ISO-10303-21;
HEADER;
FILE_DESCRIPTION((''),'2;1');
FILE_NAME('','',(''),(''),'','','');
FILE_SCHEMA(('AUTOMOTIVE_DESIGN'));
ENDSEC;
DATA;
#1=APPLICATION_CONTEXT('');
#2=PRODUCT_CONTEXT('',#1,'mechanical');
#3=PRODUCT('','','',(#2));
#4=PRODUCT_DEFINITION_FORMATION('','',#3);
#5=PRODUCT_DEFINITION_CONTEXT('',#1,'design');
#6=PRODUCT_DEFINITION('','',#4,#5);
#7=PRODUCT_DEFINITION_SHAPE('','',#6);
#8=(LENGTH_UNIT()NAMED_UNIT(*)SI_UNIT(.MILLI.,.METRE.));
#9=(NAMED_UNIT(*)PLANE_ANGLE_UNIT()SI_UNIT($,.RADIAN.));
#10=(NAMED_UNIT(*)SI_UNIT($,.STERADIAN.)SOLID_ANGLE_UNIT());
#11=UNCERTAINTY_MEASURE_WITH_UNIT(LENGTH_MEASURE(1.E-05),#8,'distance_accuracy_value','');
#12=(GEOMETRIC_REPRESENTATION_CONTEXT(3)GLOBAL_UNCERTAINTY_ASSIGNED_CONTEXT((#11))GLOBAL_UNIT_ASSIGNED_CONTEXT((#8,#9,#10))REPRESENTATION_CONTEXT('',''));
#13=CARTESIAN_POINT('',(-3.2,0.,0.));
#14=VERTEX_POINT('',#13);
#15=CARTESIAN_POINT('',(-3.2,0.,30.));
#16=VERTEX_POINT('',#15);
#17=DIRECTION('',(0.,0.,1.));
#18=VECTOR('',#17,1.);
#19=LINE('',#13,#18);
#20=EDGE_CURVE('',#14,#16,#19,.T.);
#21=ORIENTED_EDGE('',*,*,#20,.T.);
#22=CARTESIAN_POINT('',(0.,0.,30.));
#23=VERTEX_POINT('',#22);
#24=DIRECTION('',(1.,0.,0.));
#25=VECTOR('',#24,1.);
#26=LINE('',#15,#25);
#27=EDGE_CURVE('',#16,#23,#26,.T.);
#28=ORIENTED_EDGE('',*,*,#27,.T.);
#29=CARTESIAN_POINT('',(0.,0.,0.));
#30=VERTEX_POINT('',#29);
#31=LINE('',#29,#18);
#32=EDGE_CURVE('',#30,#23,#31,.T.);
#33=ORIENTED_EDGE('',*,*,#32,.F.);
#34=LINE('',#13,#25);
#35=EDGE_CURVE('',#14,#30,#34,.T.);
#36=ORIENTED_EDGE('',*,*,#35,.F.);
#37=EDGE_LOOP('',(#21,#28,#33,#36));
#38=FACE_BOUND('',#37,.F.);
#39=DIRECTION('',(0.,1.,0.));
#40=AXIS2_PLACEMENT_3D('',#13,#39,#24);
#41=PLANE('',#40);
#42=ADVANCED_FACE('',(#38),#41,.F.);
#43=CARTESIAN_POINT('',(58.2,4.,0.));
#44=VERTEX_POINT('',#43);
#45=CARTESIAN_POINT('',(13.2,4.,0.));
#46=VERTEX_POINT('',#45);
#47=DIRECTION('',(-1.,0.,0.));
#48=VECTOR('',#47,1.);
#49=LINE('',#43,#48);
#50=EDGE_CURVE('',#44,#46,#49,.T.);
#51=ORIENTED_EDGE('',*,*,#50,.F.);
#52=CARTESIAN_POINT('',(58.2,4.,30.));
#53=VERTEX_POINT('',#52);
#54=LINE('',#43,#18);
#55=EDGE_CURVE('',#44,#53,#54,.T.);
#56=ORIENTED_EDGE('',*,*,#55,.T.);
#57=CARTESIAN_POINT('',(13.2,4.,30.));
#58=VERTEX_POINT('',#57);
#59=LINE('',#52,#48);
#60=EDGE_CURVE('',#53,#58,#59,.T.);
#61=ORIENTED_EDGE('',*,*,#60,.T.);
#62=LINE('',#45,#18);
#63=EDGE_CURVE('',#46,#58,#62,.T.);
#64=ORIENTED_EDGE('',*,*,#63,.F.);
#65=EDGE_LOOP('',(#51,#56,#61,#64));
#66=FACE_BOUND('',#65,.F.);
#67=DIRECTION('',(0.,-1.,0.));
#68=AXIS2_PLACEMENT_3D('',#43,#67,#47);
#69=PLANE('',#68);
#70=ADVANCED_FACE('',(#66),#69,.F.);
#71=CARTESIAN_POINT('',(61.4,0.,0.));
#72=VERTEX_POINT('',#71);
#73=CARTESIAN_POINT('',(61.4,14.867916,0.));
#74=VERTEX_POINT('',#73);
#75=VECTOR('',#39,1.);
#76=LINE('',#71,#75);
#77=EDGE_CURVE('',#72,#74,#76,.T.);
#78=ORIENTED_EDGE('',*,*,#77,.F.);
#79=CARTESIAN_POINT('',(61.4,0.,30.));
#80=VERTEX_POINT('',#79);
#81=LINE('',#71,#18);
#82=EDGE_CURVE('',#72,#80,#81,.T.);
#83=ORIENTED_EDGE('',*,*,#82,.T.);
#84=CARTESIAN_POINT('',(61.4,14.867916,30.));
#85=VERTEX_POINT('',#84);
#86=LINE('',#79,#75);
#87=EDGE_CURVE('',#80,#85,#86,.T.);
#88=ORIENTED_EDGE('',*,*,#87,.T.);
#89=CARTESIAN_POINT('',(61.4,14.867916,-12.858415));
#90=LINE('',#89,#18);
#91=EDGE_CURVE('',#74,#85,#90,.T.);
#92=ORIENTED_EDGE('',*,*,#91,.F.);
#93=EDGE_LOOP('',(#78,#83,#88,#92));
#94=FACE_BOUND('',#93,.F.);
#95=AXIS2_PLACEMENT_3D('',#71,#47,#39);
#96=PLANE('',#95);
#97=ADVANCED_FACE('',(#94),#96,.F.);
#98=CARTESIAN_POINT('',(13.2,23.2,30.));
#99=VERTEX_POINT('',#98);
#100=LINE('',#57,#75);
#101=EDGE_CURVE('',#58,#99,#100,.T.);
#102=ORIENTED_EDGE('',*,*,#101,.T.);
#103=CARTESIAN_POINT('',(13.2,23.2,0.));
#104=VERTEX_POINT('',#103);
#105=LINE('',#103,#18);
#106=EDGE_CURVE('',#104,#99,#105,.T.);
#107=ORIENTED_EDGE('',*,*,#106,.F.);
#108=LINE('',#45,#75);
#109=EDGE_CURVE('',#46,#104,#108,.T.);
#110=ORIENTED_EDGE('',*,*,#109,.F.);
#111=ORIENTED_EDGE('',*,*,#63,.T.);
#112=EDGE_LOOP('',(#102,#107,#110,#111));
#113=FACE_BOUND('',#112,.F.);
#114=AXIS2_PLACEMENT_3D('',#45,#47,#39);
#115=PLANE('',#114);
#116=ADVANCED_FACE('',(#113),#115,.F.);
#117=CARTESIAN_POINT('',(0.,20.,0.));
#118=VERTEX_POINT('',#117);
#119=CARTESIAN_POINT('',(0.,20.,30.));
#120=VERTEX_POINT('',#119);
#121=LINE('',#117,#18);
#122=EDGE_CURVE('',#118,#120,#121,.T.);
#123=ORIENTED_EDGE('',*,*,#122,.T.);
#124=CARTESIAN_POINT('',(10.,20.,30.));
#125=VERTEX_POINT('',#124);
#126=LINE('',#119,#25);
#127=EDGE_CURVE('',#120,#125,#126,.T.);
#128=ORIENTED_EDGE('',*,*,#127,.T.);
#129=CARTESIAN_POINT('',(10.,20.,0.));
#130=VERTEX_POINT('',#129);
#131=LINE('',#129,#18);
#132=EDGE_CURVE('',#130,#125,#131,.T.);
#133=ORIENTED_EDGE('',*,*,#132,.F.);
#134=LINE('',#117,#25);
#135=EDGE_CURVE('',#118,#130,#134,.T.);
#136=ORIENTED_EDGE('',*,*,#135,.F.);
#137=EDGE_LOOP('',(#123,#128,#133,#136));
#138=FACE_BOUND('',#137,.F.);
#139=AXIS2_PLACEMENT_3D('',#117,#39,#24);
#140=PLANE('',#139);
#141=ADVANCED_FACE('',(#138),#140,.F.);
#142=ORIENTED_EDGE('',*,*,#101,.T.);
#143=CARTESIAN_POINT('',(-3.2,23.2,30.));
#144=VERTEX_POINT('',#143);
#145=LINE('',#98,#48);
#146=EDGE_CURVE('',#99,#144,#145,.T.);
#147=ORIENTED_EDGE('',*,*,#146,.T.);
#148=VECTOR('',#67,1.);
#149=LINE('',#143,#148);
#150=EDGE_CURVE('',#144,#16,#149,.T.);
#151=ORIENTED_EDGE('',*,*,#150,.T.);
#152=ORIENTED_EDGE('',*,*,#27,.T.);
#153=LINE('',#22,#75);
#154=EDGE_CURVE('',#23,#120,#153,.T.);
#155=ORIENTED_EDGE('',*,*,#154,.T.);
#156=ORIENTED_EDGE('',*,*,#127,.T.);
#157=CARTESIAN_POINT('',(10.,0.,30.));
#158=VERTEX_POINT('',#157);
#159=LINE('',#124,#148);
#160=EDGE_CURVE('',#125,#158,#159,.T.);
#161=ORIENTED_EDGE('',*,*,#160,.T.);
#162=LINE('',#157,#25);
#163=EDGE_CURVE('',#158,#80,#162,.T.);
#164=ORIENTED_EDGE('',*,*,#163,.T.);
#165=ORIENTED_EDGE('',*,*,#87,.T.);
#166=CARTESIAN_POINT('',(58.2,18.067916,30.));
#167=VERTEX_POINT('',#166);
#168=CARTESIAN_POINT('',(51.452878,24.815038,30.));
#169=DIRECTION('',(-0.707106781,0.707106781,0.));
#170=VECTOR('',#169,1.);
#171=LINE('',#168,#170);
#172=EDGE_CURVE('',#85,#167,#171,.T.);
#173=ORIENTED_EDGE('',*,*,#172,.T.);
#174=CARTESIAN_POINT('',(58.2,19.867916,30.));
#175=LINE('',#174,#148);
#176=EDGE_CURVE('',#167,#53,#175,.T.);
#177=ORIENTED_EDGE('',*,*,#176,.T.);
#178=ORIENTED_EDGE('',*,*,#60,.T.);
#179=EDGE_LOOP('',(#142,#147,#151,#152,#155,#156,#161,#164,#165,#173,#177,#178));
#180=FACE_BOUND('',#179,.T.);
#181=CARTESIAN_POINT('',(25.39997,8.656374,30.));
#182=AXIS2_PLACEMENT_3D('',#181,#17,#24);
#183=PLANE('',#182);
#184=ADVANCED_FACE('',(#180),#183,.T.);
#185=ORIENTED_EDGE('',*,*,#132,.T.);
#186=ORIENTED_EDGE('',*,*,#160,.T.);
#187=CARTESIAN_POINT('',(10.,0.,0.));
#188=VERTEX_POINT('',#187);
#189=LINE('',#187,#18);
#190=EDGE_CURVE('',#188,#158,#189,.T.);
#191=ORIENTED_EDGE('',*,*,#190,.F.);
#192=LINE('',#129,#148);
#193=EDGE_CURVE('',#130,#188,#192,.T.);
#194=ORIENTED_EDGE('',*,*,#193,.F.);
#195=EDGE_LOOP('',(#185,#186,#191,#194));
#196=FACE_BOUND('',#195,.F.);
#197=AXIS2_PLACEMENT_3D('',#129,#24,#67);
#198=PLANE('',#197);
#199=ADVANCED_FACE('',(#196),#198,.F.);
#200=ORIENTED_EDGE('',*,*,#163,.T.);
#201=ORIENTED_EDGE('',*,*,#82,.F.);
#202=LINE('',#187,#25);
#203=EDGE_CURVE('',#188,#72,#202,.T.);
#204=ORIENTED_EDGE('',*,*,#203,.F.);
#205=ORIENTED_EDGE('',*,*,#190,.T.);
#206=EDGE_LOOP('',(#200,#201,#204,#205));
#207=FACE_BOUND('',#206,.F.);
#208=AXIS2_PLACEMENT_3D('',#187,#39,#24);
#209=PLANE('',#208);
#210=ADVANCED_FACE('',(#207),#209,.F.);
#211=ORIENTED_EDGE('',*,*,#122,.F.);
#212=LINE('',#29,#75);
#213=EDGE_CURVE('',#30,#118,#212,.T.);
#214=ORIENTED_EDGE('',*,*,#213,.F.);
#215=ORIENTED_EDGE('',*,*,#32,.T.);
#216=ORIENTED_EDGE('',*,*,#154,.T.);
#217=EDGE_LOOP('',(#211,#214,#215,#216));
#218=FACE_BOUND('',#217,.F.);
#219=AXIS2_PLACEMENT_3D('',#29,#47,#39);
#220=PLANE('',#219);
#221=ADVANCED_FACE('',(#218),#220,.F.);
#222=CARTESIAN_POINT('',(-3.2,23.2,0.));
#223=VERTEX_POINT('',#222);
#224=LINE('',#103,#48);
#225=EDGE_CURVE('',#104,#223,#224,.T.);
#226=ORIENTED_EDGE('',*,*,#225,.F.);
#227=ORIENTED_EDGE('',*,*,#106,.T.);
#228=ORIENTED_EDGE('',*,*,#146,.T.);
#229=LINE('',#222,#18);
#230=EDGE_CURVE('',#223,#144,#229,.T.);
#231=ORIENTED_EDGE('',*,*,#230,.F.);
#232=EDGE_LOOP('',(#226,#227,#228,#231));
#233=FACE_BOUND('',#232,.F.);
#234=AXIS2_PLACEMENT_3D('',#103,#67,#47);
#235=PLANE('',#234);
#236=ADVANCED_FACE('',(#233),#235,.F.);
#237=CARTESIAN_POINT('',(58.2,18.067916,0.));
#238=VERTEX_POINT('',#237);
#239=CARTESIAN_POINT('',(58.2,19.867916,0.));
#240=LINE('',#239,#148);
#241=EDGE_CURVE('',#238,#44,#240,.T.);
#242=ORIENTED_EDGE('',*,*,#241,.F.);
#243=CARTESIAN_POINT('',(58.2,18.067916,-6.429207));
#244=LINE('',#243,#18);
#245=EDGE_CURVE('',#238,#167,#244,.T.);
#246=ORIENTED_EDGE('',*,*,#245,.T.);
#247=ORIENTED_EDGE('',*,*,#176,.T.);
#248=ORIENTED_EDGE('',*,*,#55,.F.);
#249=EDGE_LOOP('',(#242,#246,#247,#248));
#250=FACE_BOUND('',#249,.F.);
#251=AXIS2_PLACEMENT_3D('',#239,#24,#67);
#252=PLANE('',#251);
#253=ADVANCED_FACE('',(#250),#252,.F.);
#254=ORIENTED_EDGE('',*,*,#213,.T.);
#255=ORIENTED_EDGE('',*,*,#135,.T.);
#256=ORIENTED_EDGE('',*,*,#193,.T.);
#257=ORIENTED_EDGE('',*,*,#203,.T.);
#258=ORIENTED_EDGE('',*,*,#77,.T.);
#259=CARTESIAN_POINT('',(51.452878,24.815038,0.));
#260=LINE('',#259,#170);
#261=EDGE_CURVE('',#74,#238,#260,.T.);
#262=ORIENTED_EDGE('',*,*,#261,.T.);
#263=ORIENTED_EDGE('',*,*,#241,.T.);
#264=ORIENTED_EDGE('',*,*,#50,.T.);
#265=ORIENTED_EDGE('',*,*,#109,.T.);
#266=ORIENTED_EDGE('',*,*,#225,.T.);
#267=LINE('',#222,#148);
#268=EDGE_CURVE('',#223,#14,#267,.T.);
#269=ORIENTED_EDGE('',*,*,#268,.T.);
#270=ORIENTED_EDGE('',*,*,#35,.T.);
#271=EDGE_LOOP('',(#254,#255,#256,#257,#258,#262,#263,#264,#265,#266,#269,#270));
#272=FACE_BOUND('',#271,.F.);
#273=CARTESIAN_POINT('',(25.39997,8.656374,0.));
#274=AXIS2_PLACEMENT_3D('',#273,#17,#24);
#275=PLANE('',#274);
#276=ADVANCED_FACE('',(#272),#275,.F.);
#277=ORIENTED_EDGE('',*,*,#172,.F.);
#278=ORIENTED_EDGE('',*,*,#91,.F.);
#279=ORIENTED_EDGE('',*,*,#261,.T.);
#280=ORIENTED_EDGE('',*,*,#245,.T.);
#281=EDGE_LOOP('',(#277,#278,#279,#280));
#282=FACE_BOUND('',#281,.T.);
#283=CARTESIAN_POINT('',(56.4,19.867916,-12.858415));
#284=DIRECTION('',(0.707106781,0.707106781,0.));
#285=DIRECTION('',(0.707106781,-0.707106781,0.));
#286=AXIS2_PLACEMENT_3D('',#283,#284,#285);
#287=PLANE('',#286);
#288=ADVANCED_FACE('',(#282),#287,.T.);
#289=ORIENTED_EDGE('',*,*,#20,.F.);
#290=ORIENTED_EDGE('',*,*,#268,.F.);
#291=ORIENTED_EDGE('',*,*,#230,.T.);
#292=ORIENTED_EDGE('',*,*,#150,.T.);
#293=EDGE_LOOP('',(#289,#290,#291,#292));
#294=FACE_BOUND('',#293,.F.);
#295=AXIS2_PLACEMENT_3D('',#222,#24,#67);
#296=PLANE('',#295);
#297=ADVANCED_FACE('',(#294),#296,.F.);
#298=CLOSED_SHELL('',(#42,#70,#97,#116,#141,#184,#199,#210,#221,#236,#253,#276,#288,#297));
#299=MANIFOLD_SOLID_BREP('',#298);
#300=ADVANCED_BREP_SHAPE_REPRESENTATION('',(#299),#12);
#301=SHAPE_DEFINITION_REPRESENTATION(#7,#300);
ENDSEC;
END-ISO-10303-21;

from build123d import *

# Parameters (mm, degrees)
F1_DEPTH    = 30
F2_T1_DEPTH = 55.7168298797


# Not quite as in the source:
# - a fillet or chamfer that OpenCascade refuses, or shapes differently, is made with other operations: its cross-section is extruded or revolved along the edge and cut away or added


with BuildPart() as f1:
    # F0 (on Top) → F1 (new body)
    with BuildSketch(Plane.XY):
        Polygon((-3.2, 0), (0, 0), (0, 20), (10, 20), (10, 0), (13.2, 0), (58.2, 0), (61.4, 0), (61.4, 19.8679156601), (58.2, 19.8679156601), (58.2, 4.00000019), (13.2, 4.00000019), (13.2, 23.2), (-3.2, 23.2), align=None)
    extrude(amount=F1_DEPTH)

    # F2: chamfer of 5 on 1 edges, made by hand

    # F2_s2 → F2_t1 (cut)
    with BuildSketch(Plane.XY.offset(-12.8584149398)):
        Polygon((56.4, 19.8679156601), (61.4, 14.8679156601), (61.4, 19.8679156601), align=None)
    extrude(amount=F2_T1_DEPTH, mode=Mode.SUBTRACT)


solid = f1.part
